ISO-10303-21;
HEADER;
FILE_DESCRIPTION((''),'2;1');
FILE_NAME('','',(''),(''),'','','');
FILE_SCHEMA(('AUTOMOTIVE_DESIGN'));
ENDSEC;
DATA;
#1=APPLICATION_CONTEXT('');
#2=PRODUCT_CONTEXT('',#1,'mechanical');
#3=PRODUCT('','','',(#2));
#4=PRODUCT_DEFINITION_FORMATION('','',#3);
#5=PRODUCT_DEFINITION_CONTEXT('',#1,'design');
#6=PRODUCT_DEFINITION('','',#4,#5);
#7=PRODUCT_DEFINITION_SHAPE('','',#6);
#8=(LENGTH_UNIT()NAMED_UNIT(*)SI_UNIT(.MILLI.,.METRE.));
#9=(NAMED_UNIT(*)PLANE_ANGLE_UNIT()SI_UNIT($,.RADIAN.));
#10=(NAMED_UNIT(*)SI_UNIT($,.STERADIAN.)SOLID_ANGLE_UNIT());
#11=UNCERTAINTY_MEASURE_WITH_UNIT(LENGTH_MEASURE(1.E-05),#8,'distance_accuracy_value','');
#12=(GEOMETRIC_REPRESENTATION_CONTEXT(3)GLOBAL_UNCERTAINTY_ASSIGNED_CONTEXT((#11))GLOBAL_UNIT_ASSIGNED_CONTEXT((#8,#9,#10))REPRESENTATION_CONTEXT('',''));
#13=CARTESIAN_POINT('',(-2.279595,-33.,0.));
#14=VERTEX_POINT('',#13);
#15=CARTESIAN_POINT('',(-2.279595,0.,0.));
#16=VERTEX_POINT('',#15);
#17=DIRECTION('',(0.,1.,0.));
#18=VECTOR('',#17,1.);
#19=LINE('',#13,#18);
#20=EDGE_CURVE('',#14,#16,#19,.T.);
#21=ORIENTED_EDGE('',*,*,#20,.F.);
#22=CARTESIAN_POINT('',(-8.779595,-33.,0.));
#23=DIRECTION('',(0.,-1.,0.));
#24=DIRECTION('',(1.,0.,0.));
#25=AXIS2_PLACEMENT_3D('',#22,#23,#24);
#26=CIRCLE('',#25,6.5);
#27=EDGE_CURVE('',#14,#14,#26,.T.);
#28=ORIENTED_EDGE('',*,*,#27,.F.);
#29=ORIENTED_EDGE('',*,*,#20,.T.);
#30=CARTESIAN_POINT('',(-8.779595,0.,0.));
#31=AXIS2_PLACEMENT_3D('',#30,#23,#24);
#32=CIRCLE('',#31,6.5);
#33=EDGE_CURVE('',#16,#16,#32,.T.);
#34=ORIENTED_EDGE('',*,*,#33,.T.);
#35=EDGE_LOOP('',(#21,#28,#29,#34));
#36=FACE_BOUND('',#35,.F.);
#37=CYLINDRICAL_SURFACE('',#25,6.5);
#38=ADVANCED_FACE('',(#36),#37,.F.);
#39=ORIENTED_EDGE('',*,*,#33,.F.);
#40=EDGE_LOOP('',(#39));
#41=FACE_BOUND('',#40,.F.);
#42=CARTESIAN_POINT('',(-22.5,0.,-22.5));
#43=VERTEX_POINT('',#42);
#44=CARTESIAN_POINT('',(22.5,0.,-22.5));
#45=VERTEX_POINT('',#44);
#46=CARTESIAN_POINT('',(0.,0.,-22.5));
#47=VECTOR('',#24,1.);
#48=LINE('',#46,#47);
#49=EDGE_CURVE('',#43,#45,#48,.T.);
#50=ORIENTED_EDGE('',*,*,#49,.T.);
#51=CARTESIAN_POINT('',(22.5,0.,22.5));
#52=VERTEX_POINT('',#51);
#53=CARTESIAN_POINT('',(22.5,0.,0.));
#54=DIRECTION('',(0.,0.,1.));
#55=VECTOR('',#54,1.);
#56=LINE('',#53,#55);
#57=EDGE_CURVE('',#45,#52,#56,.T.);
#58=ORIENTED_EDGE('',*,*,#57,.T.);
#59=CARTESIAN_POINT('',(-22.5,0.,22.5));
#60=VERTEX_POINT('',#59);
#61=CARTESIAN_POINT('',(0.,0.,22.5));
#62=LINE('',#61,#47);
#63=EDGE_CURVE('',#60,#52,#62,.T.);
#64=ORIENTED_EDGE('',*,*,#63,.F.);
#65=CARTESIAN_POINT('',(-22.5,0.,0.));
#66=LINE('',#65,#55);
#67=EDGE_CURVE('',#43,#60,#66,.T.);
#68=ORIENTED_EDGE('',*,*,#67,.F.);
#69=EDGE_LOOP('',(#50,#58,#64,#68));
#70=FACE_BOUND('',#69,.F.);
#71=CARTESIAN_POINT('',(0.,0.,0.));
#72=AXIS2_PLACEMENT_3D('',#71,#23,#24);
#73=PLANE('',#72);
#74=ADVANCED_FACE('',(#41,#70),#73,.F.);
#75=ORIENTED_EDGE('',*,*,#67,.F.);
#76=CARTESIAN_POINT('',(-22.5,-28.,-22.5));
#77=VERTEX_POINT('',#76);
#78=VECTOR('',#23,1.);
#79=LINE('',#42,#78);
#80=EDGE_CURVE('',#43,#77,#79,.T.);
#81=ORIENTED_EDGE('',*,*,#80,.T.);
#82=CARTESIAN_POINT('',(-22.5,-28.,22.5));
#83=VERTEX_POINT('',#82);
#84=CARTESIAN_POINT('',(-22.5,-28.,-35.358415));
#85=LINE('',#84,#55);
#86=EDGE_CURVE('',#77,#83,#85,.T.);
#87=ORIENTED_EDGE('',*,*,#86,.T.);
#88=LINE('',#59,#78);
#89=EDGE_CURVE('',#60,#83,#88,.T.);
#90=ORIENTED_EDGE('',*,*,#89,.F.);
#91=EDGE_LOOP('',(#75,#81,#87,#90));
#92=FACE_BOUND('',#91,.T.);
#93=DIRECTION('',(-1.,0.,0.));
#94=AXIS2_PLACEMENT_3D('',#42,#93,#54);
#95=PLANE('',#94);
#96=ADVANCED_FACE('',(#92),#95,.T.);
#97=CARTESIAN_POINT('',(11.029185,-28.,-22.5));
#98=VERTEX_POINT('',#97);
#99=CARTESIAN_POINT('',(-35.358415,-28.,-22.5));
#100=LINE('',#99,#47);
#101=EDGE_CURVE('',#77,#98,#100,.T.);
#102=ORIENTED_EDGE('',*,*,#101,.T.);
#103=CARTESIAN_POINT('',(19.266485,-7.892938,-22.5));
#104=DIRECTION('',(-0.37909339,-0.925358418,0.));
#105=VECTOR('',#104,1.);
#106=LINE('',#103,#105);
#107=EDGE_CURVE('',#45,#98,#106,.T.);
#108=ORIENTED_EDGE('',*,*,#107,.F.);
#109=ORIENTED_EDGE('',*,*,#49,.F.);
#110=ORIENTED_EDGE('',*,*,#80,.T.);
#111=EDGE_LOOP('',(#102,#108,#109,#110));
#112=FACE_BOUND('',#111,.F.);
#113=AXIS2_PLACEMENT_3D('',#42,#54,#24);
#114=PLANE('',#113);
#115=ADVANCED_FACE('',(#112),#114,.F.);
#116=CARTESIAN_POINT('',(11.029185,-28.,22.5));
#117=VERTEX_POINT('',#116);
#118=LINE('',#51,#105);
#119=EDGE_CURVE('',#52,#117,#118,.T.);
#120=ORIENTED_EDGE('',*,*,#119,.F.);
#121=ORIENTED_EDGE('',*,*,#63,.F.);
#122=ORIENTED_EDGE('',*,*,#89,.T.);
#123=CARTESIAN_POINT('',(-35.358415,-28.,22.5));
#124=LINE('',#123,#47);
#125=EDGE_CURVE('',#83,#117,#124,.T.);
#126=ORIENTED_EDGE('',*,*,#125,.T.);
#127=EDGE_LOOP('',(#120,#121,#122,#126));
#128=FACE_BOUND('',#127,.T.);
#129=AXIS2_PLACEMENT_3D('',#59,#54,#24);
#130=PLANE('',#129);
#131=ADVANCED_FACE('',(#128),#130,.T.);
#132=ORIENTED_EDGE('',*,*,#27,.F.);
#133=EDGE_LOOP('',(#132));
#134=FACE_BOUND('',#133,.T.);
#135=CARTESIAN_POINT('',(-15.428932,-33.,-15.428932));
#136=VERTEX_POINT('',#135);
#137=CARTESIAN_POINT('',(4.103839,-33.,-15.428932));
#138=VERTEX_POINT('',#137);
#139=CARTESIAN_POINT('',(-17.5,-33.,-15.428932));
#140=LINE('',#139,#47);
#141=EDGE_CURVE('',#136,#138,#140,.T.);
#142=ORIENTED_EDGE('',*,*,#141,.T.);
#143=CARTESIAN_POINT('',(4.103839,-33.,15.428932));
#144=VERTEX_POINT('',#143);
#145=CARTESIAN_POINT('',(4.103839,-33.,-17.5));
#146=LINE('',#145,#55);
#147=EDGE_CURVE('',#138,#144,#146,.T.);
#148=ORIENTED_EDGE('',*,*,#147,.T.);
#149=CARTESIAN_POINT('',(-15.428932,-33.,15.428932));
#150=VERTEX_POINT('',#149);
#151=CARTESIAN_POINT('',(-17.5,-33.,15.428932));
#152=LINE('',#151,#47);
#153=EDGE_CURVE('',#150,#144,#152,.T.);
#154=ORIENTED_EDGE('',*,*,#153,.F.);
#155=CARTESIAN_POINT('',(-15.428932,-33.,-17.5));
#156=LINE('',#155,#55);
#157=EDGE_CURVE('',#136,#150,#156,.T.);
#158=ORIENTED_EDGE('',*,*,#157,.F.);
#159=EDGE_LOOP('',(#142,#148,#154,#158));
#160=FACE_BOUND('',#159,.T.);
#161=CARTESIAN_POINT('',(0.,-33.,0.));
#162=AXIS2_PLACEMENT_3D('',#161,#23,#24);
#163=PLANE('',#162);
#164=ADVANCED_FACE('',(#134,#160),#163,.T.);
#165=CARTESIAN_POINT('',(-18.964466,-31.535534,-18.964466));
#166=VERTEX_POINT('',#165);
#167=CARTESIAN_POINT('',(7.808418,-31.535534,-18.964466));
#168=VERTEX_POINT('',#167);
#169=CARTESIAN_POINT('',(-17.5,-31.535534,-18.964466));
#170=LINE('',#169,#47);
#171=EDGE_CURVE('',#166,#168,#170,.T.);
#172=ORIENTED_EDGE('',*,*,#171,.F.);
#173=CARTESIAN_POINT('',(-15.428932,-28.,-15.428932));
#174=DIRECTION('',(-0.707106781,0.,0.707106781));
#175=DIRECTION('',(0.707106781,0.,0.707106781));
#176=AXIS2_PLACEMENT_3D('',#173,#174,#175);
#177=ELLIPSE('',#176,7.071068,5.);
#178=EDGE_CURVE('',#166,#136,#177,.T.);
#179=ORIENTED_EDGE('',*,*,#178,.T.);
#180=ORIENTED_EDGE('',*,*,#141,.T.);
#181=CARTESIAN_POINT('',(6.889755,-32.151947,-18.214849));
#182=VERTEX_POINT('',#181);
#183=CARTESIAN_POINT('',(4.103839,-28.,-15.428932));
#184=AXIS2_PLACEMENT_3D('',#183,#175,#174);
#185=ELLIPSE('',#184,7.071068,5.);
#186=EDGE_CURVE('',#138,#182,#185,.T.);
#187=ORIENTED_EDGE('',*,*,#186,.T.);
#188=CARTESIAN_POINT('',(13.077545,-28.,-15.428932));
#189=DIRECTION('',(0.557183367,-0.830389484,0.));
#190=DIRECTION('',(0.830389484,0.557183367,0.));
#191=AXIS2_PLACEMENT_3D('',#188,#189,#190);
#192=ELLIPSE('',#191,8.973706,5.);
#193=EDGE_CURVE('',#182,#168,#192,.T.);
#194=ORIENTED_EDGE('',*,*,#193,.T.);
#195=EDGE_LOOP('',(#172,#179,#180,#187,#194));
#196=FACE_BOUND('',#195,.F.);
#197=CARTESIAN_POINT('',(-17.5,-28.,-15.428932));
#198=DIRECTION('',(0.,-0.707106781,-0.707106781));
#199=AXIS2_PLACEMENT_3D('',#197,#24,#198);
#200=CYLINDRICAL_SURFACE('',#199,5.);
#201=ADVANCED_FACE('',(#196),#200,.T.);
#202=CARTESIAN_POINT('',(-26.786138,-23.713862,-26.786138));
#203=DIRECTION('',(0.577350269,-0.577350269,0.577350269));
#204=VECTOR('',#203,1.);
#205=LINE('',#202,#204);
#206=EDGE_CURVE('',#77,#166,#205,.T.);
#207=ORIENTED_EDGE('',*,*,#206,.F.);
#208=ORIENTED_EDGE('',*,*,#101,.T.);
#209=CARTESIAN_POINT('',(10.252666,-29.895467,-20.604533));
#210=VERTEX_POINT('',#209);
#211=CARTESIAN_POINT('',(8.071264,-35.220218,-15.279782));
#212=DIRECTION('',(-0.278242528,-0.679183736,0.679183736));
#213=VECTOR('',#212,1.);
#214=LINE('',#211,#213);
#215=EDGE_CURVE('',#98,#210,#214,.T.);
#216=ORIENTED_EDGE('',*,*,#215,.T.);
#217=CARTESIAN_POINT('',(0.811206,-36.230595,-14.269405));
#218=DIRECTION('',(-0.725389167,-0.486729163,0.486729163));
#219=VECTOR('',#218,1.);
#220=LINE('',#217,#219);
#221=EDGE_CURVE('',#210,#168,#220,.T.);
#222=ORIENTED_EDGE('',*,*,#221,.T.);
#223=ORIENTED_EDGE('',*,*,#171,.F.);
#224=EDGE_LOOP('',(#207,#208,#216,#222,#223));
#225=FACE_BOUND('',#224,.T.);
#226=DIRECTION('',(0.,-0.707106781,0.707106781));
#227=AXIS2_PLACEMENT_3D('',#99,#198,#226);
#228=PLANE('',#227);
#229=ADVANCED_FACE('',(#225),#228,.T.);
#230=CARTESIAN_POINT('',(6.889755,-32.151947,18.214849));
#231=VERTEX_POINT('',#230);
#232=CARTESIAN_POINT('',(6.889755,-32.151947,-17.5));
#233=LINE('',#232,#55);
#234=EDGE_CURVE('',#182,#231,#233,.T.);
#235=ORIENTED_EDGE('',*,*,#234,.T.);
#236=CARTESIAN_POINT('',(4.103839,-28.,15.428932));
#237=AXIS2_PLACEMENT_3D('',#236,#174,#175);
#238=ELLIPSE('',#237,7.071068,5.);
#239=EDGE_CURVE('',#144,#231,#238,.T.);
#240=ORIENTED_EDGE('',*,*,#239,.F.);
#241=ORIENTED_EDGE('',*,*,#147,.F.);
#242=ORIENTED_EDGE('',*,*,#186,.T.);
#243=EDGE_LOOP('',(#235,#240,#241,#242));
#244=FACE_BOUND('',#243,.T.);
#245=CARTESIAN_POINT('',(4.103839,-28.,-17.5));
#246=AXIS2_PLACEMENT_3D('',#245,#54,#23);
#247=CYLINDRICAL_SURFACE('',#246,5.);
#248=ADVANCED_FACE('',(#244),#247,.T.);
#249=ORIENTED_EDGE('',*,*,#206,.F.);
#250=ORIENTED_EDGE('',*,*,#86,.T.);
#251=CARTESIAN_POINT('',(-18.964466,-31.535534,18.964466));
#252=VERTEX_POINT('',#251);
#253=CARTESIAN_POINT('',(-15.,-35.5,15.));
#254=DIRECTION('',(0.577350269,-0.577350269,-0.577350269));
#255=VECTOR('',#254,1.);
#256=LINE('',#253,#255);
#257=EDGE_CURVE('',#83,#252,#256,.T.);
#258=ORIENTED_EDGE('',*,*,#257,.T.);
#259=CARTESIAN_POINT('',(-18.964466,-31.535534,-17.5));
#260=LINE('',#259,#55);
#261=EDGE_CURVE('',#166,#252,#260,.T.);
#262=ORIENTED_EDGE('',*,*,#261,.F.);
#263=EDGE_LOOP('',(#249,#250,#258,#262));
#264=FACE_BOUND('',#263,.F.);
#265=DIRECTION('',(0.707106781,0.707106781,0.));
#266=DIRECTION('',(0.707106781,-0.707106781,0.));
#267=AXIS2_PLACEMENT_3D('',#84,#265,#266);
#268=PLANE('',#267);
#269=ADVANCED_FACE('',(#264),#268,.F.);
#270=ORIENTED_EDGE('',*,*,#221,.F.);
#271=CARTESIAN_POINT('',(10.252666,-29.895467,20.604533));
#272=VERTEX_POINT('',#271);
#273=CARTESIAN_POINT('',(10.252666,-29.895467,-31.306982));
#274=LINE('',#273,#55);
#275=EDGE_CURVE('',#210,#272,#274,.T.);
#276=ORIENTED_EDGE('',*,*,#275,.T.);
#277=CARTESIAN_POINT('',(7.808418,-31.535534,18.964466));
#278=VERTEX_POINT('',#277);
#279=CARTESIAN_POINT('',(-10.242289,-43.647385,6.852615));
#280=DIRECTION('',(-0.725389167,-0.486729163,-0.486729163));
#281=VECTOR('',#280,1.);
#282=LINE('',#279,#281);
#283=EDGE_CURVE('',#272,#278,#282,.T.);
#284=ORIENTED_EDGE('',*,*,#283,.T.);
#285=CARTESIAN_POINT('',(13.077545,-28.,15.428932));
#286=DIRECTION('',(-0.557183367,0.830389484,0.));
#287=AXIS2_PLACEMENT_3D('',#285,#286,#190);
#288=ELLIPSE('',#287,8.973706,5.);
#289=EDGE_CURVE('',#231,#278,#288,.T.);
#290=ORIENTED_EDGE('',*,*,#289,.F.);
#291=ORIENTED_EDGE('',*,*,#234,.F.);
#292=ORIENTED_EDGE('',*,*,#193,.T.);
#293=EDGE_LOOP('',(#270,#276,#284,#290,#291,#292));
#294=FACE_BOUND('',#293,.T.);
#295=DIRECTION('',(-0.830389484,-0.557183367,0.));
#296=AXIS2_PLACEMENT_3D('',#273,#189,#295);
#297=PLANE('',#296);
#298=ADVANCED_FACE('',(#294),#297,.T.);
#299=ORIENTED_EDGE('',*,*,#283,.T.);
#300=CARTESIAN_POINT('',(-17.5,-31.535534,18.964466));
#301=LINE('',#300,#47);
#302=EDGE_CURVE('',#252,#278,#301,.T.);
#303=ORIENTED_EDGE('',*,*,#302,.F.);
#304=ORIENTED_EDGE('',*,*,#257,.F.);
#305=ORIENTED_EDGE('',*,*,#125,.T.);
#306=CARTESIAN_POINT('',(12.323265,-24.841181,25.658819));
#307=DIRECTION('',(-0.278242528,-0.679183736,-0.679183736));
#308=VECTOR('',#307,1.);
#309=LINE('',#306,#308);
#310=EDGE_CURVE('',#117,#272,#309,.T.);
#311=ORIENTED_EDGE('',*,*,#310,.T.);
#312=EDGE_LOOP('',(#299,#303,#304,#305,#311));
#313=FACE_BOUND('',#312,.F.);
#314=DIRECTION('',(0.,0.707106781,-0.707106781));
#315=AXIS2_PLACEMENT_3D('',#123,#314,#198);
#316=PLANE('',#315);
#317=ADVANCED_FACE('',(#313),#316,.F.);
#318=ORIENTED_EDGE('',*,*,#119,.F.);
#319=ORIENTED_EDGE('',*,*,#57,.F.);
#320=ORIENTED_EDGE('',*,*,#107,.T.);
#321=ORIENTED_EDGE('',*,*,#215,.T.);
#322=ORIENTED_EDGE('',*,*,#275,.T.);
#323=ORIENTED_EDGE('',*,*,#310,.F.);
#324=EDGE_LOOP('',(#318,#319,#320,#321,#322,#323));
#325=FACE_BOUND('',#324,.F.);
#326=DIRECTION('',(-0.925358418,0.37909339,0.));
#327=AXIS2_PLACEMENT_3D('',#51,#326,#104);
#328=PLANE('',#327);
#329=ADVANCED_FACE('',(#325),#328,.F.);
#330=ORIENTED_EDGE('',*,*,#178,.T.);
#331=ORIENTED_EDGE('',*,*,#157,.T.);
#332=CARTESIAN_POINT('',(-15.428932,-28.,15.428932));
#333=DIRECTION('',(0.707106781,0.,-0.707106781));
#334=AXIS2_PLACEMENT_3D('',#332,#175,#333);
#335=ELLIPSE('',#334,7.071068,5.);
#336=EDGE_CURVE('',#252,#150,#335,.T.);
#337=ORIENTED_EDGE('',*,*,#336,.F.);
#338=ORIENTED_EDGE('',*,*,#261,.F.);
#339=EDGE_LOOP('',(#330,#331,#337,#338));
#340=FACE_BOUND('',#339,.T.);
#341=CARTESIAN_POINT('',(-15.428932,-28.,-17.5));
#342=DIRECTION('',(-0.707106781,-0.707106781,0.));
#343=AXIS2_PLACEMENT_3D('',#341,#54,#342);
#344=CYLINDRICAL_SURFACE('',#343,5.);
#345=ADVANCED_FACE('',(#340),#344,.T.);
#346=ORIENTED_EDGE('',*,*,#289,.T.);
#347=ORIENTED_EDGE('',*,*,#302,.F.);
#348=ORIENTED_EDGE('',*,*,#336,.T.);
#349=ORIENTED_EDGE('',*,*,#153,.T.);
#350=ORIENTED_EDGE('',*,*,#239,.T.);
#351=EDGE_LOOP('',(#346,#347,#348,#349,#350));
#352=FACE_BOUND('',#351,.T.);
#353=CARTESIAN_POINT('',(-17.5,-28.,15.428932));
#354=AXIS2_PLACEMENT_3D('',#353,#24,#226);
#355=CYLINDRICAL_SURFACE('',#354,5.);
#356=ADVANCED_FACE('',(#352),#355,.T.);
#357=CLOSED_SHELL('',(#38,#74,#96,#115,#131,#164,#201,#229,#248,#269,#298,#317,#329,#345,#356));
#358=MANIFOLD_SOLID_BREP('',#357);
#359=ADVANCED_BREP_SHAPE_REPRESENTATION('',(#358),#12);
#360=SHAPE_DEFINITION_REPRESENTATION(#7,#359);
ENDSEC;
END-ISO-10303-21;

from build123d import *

# Parameters (mm, degrees)
F0_W        = 45
F0_H        = 45
F1_DEPTH    = 33
F3_DEPTH    = 55.8
F4_R        = 6.5
F5_DEPTH    = 68.3
F6_T1_DEPTH = 57.1976554231
F6_T3_DEPTH = 62.61396425
F6_T5_DEPTH = 70.7168298797
F7_R        = 5


# Not quite as in the source:
# - a fillet or chamfer that OpenCascade refuses, or shapes differently, is made with other operations: its cross-section is extruded or revolved along the edge and cut away or added


with BuildPart() as f1:
    # F0 (on Front) → F1 (new body)
    with BuildSketch(Plane.XZ):
        Rectangle(F0_W, F0_H)
    extrude(amount=F1_DEPTH)

    # F2 (on face) → F3 (cut)
    with BuildSketch(Plane.XY.offset(22.5)):
        Polygon((22.5, -33), (22.5, 0), (8.9808255434, -33), align=None)
    extrude(amount=-F3_DEPTH, mode=Mode.SUBTRACT)

    # F4 (on face) → F5 (cut)
    with BuildSketch(Plane.XZ.offset(33)):
        with Locations((-8.7795946747, 0)):
            Circle(F4_R)
    extrude(amount=-F5_DEPTH, mode=Mode.SUBTRACT)

    # F6: chamfer of 5 on 4 edges, made by hand

    # F6_s2 → F6_t1 (cut)
    with BuildSketch(Plane.YZ.offset(-35.3584149398)):
        Polygon((-28, 22.5), (-33, 17.5), (-33, 22.5), align=None)
        Polygon((-28, -22.5), (-33, -17.5), (-33, -22.5), align=None)
    extrude(amount=F6_T1_DEPTH, mode=Mode.SUBTRACT)

    # F6_s4 → F6_t3 (cut)
    with BuildSketch(Plane.XY.offset(-31.306982125)):
        Polygon((10.252665661, -29.8954669522), (5.6258735721, -33), (8.9808255434, -33), align=None)
    extrude(amount=F6_T3_DEPTH, mode=Mode.SUBTRACT)

    # F6_s6 → F6_t5 (cut)
    with BuildSketch(Plane.XY.offset(-35.3584149398)):
        Polygon((-22.5, -28), (-17.5, -33), (-22.5, -33), align=None)
    extrude(amount=F6_T5_DEPTH, mode=Mode.SUBTRACT)

    # F7
    f7_edges = [f1.edges().sort_by_distance(p)[0] for p in [
        (-5.937063, -33, 17.5),
        (5.625874, -33, 0),
        (-5.937063, -33, -17.5),
        (-17.5, -33, 0),
    ]]
    fillet(f7_edges, radius=F7_R)


solid = f1.part
